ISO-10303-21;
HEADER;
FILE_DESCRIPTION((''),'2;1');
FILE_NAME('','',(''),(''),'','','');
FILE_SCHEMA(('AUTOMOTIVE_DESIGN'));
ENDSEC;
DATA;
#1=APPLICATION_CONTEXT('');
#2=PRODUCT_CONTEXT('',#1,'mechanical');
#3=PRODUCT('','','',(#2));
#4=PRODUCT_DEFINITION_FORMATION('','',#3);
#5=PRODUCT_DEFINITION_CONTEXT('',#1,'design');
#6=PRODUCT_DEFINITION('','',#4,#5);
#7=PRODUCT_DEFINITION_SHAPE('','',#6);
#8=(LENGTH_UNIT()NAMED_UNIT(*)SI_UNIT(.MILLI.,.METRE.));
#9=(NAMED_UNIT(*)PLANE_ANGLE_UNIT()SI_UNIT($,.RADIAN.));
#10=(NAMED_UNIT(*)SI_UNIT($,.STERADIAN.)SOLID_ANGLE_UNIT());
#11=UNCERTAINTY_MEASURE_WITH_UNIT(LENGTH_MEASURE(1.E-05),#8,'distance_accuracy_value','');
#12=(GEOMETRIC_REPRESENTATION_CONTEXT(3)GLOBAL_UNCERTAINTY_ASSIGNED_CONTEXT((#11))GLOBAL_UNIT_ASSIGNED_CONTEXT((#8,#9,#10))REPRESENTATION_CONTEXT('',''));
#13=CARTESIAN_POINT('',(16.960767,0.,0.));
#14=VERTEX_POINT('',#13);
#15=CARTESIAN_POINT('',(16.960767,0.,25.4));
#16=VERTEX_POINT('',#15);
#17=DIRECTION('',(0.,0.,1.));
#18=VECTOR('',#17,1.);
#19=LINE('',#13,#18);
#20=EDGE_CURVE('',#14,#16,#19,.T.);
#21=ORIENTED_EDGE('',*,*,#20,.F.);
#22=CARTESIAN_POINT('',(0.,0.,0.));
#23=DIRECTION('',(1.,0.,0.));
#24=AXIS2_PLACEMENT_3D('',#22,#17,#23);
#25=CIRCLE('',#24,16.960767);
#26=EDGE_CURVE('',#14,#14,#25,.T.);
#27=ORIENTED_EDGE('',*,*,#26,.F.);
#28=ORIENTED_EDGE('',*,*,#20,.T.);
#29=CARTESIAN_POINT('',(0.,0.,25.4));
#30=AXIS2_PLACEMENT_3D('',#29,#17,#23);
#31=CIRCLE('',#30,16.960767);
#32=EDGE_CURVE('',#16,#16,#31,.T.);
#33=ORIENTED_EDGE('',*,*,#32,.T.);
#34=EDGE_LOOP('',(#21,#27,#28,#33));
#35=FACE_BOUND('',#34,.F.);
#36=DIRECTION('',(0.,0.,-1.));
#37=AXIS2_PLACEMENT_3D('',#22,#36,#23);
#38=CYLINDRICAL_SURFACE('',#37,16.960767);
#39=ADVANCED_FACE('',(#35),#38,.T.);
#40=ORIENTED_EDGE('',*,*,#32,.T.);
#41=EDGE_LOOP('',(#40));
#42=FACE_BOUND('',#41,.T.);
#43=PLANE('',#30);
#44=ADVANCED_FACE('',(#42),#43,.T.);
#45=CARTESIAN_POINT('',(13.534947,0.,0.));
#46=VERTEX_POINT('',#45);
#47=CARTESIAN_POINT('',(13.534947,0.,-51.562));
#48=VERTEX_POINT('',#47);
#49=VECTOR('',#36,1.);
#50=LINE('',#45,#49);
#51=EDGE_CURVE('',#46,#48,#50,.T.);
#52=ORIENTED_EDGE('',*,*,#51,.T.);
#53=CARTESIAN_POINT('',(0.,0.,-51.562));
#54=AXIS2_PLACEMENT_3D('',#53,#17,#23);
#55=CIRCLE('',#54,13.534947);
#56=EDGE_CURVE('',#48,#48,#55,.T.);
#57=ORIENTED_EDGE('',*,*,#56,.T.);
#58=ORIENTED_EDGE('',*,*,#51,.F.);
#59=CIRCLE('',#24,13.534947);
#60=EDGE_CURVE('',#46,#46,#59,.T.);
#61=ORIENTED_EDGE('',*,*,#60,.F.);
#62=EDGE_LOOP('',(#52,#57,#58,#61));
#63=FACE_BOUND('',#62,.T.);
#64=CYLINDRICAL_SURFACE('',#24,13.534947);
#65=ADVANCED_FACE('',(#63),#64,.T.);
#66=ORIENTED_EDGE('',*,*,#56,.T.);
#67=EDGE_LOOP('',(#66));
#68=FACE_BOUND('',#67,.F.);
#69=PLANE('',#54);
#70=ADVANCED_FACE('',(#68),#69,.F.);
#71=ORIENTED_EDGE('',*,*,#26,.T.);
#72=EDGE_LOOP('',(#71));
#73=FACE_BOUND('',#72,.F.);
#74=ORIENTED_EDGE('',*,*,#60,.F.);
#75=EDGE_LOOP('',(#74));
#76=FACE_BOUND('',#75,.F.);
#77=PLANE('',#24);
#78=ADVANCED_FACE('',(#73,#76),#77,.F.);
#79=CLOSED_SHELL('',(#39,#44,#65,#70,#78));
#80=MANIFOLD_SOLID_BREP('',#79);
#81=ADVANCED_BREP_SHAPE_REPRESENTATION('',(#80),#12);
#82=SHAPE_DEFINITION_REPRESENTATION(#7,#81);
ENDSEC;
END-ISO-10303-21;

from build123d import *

# Parameters (mm, degrees)
F0_R     = 16.9607668537
F2_DEPTH = 25.4
F4_R     = 13.5349469598
F5_DEPTH = 51.562


# Not quite as in the source:
# - the program builds the solid bodies; features that only make, move or delete a surface that nothing else refers to are left out


with BuildPart() as f2:
    # F0 (on Top) → F2 (new body)
    with BuildSketch(Plane.XY):
        Circle(F0_R)
    extrude(amount=F2_DEPTH)

    # F4 (on Top) → F5 (join)
    with BuildSketch(Plane.XY):
        Circle(F4_R)
    extrude(amount=-F5_DEPTH)


solid = f2.part
